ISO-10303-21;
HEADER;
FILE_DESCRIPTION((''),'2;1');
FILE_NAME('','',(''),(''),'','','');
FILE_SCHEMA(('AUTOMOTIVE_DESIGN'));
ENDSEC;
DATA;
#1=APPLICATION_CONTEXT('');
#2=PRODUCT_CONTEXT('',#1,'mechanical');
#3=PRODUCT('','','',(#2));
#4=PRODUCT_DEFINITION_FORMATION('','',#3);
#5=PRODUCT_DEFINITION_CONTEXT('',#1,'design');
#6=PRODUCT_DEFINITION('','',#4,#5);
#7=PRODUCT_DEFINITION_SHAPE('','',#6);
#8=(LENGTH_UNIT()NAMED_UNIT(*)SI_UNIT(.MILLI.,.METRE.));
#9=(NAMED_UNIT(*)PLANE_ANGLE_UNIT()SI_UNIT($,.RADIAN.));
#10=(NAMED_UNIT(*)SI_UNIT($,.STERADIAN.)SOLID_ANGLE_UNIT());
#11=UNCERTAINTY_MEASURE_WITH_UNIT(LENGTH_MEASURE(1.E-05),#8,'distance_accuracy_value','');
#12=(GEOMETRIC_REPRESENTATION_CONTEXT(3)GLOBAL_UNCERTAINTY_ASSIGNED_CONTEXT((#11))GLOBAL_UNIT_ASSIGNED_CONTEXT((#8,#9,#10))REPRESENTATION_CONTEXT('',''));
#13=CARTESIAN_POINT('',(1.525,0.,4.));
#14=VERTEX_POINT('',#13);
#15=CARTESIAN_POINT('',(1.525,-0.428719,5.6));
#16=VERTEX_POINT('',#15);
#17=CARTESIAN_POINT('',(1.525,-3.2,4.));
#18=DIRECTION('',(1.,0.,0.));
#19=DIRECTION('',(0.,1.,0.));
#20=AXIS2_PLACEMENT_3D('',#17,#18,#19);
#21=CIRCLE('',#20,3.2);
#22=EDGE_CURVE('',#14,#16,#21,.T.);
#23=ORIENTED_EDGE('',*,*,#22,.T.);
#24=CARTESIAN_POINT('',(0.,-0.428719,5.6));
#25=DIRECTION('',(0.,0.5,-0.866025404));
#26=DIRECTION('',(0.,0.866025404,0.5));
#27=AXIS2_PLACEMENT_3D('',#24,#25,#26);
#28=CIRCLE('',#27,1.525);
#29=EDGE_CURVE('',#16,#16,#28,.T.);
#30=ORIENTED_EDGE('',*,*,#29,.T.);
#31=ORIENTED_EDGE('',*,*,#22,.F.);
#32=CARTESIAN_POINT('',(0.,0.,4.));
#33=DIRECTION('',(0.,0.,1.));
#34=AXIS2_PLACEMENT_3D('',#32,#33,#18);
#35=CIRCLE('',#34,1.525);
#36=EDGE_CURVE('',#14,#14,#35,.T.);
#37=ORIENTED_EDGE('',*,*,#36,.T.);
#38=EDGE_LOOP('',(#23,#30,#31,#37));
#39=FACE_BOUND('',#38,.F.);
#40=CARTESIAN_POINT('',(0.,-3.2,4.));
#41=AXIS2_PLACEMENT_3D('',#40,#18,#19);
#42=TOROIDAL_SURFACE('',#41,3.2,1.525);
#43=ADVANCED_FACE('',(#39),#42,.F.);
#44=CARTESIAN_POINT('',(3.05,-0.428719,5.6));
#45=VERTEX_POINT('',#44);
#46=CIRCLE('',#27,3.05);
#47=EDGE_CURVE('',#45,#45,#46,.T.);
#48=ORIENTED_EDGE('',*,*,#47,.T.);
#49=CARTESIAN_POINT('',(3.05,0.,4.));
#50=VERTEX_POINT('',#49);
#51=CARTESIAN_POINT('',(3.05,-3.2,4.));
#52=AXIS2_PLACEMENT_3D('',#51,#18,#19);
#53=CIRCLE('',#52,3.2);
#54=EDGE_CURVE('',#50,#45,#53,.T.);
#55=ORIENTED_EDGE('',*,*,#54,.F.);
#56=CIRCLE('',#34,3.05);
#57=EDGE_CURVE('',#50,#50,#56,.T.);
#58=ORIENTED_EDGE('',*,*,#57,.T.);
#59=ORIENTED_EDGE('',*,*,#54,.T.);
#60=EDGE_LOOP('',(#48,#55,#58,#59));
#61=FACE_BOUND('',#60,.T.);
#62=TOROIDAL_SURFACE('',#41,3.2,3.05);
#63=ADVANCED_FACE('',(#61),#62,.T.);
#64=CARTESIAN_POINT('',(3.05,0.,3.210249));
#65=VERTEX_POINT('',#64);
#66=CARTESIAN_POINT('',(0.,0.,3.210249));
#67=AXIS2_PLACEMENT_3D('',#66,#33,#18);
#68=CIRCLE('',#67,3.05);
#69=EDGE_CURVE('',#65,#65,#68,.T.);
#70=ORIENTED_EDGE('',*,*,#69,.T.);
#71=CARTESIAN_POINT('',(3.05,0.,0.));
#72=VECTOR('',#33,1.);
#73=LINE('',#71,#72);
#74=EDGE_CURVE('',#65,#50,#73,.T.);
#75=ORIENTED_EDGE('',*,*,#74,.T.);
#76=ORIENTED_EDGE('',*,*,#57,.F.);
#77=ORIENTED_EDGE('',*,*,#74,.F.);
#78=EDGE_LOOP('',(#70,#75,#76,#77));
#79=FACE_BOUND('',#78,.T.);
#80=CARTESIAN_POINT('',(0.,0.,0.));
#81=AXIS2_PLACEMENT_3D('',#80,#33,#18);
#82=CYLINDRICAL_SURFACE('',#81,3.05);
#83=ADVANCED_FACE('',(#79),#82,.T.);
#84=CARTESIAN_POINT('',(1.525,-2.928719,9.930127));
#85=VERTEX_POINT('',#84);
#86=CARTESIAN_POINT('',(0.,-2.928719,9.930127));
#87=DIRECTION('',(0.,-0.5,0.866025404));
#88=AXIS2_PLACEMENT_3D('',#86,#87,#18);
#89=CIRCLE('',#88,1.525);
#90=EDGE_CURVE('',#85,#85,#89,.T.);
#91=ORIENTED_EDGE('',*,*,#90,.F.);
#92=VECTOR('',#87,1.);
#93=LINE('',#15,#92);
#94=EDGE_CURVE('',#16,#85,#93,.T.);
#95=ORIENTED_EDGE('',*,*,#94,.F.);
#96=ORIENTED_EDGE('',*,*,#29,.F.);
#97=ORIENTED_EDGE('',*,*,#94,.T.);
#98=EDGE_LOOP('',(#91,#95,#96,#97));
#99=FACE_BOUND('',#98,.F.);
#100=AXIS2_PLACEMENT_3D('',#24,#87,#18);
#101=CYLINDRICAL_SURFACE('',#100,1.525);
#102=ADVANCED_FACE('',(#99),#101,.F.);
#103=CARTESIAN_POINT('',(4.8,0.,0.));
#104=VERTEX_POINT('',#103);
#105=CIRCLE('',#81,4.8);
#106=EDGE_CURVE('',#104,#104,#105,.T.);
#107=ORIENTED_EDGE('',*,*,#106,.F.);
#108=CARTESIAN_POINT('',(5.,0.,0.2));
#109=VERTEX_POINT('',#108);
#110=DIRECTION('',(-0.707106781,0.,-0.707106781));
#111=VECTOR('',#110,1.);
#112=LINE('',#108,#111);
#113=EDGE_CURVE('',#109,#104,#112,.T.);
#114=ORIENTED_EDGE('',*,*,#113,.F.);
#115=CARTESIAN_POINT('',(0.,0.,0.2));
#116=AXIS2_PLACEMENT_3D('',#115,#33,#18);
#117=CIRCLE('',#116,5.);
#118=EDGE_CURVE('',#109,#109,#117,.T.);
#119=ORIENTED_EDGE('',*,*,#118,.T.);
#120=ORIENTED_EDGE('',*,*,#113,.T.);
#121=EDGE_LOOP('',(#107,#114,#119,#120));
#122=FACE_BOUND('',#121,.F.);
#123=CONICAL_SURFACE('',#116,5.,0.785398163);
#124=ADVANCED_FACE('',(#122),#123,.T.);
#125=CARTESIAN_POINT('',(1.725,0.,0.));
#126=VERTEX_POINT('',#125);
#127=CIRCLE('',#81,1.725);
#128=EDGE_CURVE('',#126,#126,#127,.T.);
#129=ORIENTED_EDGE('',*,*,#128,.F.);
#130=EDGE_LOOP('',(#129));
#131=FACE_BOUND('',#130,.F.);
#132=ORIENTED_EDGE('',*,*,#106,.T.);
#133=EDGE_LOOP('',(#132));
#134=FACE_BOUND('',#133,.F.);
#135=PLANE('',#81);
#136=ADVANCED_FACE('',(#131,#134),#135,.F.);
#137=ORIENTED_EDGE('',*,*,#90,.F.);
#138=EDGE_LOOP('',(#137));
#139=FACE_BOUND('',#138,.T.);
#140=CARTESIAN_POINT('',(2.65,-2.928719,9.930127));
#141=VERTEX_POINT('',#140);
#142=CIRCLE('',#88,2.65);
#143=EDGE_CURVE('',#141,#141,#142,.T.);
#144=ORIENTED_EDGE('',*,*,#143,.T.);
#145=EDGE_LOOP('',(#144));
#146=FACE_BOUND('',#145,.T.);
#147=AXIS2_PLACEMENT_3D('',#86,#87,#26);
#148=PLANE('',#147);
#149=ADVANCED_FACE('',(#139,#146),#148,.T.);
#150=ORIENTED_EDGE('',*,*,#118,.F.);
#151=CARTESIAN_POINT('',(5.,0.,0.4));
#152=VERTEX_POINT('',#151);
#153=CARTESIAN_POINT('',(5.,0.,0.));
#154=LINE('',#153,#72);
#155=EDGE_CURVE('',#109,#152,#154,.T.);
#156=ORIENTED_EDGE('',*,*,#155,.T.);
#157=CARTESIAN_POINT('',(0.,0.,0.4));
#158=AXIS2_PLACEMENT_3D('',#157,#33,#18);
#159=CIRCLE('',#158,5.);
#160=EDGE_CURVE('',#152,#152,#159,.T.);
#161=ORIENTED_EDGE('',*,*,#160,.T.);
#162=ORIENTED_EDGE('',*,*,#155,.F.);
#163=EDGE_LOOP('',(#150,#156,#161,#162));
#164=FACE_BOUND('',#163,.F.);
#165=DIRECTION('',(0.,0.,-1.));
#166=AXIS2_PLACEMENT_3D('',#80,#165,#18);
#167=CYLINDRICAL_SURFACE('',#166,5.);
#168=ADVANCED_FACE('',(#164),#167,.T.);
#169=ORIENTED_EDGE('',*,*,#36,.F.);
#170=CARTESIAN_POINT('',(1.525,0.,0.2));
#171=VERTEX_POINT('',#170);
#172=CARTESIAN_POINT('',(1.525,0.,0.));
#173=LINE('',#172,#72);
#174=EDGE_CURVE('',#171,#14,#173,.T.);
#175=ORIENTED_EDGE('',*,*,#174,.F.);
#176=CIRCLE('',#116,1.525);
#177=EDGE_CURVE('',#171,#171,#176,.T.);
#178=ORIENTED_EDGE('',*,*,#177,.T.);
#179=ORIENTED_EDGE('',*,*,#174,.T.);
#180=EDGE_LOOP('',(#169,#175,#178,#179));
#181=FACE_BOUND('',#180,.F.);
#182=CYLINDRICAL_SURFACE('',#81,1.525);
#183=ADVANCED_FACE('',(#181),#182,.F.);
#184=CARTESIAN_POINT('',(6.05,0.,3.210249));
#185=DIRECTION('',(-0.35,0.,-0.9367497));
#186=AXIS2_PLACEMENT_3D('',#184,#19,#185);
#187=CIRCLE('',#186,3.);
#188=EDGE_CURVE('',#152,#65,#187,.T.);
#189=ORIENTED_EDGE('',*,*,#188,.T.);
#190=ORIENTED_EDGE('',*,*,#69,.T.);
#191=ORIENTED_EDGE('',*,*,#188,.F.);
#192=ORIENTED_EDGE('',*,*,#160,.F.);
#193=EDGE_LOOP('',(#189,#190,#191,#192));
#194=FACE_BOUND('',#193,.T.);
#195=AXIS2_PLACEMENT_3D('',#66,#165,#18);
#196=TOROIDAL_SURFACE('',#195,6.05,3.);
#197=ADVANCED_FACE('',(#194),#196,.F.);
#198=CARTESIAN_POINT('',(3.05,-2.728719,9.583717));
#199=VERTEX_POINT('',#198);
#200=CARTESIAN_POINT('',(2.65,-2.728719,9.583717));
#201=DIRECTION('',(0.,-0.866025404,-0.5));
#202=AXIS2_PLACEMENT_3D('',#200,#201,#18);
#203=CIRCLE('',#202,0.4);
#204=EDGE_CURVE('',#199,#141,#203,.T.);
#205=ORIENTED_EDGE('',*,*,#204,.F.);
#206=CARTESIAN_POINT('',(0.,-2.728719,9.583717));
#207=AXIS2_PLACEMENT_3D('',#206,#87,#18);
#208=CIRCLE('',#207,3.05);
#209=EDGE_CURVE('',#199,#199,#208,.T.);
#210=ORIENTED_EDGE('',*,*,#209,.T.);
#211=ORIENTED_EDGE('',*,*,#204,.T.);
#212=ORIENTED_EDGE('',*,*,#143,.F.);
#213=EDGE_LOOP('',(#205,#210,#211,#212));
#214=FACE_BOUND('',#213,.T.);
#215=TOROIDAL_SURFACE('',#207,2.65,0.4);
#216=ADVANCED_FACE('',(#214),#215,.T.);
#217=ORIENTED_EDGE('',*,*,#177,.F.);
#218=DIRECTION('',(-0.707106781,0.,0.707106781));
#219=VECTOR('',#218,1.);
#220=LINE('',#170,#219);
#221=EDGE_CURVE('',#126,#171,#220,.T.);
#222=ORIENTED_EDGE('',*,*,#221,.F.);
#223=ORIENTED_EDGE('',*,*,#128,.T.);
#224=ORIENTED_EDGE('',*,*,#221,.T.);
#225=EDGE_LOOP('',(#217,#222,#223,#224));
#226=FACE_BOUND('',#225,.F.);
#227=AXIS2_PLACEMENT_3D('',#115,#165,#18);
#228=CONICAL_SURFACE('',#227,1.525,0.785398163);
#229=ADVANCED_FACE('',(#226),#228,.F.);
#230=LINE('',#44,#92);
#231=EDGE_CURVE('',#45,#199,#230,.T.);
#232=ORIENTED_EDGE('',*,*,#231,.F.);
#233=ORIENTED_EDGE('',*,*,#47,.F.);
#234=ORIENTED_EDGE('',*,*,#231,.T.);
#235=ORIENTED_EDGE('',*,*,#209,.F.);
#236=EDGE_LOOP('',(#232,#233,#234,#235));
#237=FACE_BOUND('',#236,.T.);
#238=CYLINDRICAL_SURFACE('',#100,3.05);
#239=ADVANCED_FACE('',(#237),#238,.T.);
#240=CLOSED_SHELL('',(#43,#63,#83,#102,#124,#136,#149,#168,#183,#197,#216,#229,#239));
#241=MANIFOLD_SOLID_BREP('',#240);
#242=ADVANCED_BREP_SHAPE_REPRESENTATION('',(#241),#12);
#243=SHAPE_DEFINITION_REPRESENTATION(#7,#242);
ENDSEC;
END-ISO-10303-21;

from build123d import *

# Parameters (mm, degrees)
F0_R     = 5
F0_R_2   = 3
F1_DEPTH = 0.4
F3_R     = 3.05
F3_R_2   = 1.525
F6_SIZE  = 0.2
F7_R     = 0.4


# Not quite as in the source:
# - a fillet or chamfer that OpenCascade refuses, or shapes differently, is made with other operations: its cross-section is extruded or revolved along the edge and cut away or added


with BuildPart() as f1:
    # F0 (on Top) → F1 (new body)
    with BuildSketch(Plane.XY):
        Circle(F0_R)
        Circle(F0_R_2, mode=Mode.SUBTRACT)
    extrude(amount=F1_DEPTH)

    # F4: sweep along a path in F2
    with BuildLine(Plane.YZ) as f4_path:
        Line((0, 0), (0, 4))
        ThreePointArc((0, 4), (-0.1090373559, 4.8282209443), (-0.4287187079, 5.6))
        Line((-0.4287187079, 5.6), (-2.9287187079, 9.9301270189))
    # F3 (on Top) → F4 (sweep)
    with BuildSketch(Plane.XY):
        Circle(F3_R)
        Circle(F3_R_2, mode=Mode.SUBTRACT)
    sweep(path=f4_path.line)

    # F5: fillet of radius 3 on 1 edges, made by hand

    # F5_s1 → F5_t2 (revolve)
    with BuildSketch(Plane.XZ):
        with BuildLine():
            ThreePointArc((5, 0.4), (3.5852484912, 1.4999859616), (3.05, 3.2102490993))
            Line((3.05, 3.2102490993), (3.05, 0.4))
            Line((3.05, 0.4), (5, 0.4))
        make_face()
    revolve(axis=Axis((0, 0, 0.4), (0, 0, 1)))

    # F6
    f6_edges = [f1.edges().sort_by_distance(p)[0] for p in [
        (-5, 0, 0),
        (-1.525, 0, 0),
    ]]
    chamfer(f6_edges, length=F6_SIZE)

    # F7
    f7_edges = [f1.edges().sort_by_distance(p)[0] for p in [
        (-3.05, -2.928719, 9.930127),
    ]]
    fillet(f7_edges, radius=F7_R)


solid = f1.part
